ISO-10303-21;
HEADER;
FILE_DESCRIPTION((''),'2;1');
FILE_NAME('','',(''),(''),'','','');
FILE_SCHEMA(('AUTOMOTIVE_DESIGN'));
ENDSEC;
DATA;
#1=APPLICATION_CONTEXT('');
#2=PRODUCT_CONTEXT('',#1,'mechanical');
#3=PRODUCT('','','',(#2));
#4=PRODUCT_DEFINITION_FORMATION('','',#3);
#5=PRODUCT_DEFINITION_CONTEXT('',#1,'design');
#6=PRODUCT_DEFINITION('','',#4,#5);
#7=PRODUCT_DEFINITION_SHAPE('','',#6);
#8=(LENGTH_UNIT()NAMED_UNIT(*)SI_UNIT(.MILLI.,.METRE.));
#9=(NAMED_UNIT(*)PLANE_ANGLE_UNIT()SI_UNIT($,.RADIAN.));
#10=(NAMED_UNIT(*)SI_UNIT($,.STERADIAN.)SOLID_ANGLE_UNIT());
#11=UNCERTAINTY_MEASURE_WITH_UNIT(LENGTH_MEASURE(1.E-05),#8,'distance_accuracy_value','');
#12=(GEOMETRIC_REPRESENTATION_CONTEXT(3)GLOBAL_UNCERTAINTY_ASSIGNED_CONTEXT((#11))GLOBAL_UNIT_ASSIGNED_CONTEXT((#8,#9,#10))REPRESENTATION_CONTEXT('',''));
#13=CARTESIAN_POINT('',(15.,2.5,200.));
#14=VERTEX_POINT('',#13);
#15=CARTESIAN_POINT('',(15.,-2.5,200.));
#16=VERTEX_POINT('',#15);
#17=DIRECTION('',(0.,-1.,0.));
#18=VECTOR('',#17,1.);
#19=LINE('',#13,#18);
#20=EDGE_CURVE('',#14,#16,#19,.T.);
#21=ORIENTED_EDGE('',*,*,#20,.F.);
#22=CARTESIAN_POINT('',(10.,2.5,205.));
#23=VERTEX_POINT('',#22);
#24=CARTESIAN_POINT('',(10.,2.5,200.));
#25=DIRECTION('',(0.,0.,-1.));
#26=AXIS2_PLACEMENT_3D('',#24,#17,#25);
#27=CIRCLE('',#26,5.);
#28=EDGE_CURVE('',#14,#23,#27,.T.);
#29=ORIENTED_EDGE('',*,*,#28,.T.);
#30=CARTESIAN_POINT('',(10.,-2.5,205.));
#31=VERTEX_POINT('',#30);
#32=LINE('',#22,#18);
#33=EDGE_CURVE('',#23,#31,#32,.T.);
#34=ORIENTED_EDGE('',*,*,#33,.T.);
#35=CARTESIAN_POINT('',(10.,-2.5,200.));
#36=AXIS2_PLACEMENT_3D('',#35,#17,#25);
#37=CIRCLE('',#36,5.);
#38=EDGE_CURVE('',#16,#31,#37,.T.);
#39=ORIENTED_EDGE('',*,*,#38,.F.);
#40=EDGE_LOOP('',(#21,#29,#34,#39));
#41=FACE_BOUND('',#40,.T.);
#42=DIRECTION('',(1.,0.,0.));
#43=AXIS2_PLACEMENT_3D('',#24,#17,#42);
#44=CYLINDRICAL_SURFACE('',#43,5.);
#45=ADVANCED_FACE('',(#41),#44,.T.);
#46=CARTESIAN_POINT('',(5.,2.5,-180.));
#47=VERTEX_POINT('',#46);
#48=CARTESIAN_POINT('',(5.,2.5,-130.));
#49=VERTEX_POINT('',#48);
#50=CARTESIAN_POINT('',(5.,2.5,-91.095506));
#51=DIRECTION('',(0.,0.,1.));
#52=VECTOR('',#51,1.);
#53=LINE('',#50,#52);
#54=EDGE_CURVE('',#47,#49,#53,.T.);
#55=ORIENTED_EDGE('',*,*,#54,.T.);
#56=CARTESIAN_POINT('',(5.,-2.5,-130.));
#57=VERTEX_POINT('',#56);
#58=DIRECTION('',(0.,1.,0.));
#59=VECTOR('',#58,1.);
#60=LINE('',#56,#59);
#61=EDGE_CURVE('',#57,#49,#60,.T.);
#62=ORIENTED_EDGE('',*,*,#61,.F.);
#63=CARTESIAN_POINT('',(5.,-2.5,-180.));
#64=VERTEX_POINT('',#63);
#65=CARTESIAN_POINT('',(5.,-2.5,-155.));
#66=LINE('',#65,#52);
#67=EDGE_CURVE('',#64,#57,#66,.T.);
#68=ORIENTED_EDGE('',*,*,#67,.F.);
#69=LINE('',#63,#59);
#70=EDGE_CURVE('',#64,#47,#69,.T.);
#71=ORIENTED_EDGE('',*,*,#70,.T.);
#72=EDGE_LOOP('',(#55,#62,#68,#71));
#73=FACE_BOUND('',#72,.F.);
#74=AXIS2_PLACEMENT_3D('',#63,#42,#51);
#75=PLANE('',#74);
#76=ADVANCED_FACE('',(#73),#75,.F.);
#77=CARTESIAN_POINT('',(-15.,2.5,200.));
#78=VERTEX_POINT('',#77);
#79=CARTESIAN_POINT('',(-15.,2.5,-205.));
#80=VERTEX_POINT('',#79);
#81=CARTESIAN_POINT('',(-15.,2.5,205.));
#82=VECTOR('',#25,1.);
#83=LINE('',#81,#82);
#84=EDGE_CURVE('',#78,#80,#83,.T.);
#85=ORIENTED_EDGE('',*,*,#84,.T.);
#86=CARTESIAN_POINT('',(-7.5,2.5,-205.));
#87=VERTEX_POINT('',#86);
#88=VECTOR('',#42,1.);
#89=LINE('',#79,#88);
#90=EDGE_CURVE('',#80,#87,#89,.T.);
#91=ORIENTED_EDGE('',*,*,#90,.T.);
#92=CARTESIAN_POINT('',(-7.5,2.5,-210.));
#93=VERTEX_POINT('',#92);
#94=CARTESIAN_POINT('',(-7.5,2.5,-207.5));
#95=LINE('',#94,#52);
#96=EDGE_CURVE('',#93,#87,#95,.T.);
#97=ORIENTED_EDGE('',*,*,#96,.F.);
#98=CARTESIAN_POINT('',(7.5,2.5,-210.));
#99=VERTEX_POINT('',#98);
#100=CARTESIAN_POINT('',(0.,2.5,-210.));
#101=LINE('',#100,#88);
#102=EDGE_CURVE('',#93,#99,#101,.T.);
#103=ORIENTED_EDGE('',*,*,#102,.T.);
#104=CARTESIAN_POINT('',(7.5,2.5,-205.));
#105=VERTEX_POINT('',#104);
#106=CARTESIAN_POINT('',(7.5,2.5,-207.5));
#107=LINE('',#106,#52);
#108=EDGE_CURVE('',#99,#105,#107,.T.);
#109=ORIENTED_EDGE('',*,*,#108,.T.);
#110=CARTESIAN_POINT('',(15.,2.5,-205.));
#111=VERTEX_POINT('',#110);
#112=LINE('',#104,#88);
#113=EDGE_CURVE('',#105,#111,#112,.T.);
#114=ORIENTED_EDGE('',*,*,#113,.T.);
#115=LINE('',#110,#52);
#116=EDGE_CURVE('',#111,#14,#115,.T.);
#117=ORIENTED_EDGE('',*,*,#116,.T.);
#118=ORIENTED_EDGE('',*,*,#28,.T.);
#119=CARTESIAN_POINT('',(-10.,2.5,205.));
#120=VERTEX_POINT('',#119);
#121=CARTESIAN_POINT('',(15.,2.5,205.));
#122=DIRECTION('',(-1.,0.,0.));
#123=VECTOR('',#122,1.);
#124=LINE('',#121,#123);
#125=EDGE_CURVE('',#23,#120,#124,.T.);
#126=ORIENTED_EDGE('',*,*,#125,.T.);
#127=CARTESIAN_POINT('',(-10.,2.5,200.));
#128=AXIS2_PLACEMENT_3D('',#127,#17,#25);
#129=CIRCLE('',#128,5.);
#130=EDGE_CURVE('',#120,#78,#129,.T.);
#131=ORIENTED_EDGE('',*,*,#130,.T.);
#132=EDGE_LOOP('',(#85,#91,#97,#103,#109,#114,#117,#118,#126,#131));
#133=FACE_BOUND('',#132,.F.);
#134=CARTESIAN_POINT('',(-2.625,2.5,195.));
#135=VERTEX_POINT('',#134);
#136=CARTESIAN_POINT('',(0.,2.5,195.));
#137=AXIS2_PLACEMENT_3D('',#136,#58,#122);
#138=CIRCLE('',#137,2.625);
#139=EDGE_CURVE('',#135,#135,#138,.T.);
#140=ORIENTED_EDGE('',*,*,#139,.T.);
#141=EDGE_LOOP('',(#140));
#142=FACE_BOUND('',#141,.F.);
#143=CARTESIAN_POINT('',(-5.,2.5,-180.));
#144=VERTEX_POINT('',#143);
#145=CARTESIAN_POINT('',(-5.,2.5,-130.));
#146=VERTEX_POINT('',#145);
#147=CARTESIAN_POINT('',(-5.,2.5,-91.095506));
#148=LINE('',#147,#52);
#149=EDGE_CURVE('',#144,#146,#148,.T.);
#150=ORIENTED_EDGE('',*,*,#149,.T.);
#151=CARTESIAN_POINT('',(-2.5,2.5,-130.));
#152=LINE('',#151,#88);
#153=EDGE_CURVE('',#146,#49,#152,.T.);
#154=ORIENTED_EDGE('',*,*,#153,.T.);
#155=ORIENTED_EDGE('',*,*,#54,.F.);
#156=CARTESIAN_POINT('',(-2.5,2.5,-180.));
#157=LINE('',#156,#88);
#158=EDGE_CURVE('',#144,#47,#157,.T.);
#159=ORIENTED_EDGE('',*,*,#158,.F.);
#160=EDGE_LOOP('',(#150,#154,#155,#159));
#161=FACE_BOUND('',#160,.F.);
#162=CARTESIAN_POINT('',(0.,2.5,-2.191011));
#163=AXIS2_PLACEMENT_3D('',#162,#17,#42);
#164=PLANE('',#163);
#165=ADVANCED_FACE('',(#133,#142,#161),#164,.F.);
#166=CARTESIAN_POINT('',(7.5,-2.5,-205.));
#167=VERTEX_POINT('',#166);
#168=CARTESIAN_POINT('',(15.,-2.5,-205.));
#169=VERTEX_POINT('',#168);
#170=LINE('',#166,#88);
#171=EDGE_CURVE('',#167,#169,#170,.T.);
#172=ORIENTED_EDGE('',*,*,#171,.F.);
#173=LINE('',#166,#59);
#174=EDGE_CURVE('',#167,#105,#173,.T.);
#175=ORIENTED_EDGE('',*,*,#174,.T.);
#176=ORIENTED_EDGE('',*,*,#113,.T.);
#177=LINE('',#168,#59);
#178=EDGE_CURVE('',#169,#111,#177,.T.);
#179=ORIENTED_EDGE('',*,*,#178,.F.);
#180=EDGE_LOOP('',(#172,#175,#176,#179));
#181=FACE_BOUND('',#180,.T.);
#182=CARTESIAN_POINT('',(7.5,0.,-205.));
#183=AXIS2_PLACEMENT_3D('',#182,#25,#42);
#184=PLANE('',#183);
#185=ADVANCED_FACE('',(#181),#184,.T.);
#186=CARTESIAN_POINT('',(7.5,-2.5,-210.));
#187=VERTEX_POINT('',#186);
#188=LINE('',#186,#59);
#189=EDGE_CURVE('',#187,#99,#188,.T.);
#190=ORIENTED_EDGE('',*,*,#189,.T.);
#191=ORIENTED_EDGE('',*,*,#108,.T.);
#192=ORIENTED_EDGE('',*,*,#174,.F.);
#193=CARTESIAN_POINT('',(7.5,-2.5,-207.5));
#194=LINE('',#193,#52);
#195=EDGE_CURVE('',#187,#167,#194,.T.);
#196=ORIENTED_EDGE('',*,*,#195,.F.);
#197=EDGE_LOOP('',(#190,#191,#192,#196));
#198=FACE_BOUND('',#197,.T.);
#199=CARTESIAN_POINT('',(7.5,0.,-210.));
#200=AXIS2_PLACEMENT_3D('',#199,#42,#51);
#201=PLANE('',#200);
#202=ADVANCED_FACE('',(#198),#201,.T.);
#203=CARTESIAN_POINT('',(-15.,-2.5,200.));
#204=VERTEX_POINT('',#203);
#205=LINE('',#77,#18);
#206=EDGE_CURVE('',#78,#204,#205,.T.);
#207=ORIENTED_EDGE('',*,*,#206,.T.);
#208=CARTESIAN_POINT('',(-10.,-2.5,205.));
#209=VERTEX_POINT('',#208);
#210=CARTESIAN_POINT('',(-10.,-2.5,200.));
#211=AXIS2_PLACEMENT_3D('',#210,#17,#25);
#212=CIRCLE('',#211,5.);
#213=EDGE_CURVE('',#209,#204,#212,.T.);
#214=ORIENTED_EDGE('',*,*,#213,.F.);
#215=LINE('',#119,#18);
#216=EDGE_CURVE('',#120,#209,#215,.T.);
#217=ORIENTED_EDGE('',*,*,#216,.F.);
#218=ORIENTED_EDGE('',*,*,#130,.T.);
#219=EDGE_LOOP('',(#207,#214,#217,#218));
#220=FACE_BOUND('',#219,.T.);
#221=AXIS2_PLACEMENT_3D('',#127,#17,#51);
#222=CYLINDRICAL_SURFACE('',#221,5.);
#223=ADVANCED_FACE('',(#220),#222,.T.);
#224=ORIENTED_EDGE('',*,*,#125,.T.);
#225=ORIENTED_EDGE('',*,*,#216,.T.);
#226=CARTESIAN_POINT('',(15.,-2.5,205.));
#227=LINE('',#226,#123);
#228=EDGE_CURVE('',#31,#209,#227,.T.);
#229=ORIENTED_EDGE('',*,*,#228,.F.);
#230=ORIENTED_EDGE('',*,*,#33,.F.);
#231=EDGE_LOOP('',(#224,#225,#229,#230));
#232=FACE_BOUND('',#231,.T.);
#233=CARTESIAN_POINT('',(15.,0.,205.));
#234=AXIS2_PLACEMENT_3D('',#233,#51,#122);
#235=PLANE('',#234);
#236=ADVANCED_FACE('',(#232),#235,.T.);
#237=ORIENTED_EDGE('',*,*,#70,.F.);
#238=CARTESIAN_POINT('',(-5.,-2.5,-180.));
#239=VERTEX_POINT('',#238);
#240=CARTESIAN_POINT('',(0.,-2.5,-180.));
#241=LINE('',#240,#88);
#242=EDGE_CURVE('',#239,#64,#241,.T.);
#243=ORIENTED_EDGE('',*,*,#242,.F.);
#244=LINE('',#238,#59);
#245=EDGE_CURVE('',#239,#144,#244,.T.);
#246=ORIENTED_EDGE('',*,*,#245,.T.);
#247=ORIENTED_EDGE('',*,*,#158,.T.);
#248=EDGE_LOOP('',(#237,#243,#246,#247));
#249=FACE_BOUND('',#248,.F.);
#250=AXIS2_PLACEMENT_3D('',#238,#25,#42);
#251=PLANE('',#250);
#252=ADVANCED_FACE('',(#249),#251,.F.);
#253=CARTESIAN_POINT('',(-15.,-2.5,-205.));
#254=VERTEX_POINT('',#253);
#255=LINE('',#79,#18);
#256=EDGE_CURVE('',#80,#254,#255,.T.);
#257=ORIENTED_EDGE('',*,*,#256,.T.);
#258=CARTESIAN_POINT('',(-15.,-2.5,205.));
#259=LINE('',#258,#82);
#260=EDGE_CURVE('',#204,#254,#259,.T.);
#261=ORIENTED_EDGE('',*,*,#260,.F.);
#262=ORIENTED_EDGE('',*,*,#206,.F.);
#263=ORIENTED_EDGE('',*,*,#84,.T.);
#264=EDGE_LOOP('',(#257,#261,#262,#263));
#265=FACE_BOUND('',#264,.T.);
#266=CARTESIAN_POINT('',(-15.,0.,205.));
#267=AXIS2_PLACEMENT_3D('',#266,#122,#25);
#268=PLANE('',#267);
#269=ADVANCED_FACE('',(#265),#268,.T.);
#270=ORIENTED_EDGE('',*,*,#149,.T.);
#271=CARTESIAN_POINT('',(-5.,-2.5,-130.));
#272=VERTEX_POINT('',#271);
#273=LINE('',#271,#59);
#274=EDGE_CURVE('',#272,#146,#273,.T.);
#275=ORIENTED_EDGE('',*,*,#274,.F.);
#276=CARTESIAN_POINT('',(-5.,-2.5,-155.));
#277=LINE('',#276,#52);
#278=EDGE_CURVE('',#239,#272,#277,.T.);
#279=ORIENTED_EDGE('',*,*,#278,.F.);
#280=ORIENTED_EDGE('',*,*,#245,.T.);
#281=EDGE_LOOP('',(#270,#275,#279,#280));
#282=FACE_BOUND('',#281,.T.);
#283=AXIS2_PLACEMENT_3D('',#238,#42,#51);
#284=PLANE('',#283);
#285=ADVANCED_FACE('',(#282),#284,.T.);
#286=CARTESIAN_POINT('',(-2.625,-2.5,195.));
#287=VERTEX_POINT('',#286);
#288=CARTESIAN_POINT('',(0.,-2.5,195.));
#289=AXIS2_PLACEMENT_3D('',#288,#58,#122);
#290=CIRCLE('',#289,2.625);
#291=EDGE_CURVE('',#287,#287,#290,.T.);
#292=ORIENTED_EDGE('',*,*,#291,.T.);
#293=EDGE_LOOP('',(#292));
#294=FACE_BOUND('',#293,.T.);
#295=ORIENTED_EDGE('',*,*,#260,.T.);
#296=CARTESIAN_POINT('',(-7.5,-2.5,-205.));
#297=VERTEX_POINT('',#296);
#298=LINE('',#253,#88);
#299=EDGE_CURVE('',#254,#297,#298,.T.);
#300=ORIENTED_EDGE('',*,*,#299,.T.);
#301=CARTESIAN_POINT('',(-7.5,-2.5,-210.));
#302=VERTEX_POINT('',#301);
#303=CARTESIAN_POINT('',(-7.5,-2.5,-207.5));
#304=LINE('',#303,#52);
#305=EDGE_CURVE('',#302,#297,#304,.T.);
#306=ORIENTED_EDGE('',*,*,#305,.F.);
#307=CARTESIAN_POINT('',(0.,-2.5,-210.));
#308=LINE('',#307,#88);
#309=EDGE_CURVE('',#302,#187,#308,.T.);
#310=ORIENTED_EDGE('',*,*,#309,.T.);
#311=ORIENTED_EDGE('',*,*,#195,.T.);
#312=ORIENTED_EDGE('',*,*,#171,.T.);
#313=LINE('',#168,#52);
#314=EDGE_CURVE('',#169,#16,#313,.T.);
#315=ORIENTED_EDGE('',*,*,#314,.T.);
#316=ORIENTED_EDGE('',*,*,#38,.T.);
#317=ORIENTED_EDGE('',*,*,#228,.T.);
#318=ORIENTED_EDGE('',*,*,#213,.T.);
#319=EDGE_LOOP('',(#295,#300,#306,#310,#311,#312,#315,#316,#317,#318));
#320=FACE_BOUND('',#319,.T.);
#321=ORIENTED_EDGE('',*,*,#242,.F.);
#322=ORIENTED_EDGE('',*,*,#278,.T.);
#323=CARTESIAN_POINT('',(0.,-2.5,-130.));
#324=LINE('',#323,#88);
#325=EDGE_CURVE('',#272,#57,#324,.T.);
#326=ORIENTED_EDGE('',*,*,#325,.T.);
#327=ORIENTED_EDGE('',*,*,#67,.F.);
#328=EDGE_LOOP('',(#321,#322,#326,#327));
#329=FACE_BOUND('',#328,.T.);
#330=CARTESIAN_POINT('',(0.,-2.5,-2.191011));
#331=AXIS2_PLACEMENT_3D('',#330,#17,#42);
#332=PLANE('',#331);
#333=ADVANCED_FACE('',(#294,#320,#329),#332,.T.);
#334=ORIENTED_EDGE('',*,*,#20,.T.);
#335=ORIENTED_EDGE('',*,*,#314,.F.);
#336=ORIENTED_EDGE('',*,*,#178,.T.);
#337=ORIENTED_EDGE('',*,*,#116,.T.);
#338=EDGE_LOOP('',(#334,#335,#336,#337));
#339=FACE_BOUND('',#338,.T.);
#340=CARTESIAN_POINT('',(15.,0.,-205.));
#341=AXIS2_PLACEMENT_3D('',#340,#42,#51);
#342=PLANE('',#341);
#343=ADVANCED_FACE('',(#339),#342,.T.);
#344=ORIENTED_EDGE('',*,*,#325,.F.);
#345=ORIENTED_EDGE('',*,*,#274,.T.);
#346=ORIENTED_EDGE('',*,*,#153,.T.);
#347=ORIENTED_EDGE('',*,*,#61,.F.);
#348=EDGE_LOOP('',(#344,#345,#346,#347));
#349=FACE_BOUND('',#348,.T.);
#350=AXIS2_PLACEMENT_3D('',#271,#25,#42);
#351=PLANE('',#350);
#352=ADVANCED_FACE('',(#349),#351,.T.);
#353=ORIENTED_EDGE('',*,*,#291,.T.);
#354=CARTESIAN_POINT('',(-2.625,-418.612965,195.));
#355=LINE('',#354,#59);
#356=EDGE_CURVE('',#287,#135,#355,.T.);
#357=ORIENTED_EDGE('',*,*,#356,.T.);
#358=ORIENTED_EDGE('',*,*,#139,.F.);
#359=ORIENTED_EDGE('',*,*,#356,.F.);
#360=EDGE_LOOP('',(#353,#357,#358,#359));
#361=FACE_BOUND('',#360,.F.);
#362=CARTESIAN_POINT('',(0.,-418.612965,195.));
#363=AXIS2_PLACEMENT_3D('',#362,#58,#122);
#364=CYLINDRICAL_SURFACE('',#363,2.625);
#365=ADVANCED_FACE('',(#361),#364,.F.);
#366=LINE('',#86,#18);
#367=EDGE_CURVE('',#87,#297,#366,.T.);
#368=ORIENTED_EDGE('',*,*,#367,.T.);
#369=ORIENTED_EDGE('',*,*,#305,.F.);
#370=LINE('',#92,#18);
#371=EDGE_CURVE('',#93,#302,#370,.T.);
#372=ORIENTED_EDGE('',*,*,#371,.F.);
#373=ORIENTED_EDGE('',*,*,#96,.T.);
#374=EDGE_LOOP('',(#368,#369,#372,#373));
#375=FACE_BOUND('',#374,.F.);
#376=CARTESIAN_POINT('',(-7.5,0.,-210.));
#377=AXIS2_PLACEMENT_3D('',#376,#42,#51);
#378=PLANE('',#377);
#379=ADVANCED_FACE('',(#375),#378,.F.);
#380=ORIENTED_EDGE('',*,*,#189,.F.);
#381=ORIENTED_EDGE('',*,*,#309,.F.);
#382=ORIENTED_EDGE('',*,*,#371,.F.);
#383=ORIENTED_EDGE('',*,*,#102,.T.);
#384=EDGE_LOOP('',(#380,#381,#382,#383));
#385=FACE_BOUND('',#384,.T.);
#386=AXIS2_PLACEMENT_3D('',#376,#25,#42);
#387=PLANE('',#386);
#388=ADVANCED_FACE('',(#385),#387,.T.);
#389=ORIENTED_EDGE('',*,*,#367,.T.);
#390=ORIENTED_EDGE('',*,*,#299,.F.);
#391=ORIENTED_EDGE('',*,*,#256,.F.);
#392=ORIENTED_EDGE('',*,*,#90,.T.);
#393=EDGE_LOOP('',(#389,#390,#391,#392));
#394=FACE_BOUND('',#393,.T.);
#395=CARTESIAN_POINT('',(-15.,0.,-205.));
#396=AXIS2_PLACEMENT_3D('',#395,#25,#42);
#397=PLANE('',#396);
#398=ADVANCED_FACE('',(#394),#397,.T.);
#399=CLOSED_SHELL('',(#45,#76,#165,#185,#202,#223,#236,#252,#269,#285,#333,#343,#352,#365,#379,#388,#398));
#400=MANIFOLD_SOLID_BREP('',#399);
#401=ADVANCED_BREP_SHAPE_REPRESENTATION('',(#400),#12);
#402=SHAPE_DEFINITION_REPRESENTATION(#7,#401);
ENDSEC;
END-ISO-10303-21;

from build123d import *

# Parameters (mm, degrees)
F0_W     = 15
F0_H     = 5
F1_DEPTH = 2.5
F3_D     = 5.25
F4_R     = 5
F5_W     = 10
F5_H     = 50
F6_DEPTH = 10


with BuildPart() as f1:
    # F0 (on Front) → F1 (new body, symmetric)
    with BuildSketch(Plane.XZ):
        Polygon((15, -205), (15, 205), (-15, 205), (-15, -205), (-7.5, -205), (-7.5, -200), (7.5, -200), (7.5, -205), align=None)
        with Locations((0, -207.5)):
            Rectangle(F0_W, F0_H)
        with Locations((0, -202.5)):
            Rectangle(F0_W, F0_H)
    extrude(amount=F1_DEPTH, both=True)

    # F3 (through all)
    with Locations(Plane.XZ.offset(2.5)):
        with Locations((0, 195)):
            Hole(F3_D / 2)

    # F4
    f4_edges = [f1.edges().sort_by_distance(p)[0] for p in [
        (15, 0, 205),
        (-15, 0, 205),
    ]]
    fillet(f4_edges, radius=F4_R)

    # F5 (on face) → F6 (cut)
    with BuildSketch(Plane.XZ.offset(2.5)):
        with Locations((0, -155)):
            Rectangle(F5_W, F5_H)
    extrude(amount=-F6_DEPTH, mode=Mode.SUBTRACT)


solid = f1.part
